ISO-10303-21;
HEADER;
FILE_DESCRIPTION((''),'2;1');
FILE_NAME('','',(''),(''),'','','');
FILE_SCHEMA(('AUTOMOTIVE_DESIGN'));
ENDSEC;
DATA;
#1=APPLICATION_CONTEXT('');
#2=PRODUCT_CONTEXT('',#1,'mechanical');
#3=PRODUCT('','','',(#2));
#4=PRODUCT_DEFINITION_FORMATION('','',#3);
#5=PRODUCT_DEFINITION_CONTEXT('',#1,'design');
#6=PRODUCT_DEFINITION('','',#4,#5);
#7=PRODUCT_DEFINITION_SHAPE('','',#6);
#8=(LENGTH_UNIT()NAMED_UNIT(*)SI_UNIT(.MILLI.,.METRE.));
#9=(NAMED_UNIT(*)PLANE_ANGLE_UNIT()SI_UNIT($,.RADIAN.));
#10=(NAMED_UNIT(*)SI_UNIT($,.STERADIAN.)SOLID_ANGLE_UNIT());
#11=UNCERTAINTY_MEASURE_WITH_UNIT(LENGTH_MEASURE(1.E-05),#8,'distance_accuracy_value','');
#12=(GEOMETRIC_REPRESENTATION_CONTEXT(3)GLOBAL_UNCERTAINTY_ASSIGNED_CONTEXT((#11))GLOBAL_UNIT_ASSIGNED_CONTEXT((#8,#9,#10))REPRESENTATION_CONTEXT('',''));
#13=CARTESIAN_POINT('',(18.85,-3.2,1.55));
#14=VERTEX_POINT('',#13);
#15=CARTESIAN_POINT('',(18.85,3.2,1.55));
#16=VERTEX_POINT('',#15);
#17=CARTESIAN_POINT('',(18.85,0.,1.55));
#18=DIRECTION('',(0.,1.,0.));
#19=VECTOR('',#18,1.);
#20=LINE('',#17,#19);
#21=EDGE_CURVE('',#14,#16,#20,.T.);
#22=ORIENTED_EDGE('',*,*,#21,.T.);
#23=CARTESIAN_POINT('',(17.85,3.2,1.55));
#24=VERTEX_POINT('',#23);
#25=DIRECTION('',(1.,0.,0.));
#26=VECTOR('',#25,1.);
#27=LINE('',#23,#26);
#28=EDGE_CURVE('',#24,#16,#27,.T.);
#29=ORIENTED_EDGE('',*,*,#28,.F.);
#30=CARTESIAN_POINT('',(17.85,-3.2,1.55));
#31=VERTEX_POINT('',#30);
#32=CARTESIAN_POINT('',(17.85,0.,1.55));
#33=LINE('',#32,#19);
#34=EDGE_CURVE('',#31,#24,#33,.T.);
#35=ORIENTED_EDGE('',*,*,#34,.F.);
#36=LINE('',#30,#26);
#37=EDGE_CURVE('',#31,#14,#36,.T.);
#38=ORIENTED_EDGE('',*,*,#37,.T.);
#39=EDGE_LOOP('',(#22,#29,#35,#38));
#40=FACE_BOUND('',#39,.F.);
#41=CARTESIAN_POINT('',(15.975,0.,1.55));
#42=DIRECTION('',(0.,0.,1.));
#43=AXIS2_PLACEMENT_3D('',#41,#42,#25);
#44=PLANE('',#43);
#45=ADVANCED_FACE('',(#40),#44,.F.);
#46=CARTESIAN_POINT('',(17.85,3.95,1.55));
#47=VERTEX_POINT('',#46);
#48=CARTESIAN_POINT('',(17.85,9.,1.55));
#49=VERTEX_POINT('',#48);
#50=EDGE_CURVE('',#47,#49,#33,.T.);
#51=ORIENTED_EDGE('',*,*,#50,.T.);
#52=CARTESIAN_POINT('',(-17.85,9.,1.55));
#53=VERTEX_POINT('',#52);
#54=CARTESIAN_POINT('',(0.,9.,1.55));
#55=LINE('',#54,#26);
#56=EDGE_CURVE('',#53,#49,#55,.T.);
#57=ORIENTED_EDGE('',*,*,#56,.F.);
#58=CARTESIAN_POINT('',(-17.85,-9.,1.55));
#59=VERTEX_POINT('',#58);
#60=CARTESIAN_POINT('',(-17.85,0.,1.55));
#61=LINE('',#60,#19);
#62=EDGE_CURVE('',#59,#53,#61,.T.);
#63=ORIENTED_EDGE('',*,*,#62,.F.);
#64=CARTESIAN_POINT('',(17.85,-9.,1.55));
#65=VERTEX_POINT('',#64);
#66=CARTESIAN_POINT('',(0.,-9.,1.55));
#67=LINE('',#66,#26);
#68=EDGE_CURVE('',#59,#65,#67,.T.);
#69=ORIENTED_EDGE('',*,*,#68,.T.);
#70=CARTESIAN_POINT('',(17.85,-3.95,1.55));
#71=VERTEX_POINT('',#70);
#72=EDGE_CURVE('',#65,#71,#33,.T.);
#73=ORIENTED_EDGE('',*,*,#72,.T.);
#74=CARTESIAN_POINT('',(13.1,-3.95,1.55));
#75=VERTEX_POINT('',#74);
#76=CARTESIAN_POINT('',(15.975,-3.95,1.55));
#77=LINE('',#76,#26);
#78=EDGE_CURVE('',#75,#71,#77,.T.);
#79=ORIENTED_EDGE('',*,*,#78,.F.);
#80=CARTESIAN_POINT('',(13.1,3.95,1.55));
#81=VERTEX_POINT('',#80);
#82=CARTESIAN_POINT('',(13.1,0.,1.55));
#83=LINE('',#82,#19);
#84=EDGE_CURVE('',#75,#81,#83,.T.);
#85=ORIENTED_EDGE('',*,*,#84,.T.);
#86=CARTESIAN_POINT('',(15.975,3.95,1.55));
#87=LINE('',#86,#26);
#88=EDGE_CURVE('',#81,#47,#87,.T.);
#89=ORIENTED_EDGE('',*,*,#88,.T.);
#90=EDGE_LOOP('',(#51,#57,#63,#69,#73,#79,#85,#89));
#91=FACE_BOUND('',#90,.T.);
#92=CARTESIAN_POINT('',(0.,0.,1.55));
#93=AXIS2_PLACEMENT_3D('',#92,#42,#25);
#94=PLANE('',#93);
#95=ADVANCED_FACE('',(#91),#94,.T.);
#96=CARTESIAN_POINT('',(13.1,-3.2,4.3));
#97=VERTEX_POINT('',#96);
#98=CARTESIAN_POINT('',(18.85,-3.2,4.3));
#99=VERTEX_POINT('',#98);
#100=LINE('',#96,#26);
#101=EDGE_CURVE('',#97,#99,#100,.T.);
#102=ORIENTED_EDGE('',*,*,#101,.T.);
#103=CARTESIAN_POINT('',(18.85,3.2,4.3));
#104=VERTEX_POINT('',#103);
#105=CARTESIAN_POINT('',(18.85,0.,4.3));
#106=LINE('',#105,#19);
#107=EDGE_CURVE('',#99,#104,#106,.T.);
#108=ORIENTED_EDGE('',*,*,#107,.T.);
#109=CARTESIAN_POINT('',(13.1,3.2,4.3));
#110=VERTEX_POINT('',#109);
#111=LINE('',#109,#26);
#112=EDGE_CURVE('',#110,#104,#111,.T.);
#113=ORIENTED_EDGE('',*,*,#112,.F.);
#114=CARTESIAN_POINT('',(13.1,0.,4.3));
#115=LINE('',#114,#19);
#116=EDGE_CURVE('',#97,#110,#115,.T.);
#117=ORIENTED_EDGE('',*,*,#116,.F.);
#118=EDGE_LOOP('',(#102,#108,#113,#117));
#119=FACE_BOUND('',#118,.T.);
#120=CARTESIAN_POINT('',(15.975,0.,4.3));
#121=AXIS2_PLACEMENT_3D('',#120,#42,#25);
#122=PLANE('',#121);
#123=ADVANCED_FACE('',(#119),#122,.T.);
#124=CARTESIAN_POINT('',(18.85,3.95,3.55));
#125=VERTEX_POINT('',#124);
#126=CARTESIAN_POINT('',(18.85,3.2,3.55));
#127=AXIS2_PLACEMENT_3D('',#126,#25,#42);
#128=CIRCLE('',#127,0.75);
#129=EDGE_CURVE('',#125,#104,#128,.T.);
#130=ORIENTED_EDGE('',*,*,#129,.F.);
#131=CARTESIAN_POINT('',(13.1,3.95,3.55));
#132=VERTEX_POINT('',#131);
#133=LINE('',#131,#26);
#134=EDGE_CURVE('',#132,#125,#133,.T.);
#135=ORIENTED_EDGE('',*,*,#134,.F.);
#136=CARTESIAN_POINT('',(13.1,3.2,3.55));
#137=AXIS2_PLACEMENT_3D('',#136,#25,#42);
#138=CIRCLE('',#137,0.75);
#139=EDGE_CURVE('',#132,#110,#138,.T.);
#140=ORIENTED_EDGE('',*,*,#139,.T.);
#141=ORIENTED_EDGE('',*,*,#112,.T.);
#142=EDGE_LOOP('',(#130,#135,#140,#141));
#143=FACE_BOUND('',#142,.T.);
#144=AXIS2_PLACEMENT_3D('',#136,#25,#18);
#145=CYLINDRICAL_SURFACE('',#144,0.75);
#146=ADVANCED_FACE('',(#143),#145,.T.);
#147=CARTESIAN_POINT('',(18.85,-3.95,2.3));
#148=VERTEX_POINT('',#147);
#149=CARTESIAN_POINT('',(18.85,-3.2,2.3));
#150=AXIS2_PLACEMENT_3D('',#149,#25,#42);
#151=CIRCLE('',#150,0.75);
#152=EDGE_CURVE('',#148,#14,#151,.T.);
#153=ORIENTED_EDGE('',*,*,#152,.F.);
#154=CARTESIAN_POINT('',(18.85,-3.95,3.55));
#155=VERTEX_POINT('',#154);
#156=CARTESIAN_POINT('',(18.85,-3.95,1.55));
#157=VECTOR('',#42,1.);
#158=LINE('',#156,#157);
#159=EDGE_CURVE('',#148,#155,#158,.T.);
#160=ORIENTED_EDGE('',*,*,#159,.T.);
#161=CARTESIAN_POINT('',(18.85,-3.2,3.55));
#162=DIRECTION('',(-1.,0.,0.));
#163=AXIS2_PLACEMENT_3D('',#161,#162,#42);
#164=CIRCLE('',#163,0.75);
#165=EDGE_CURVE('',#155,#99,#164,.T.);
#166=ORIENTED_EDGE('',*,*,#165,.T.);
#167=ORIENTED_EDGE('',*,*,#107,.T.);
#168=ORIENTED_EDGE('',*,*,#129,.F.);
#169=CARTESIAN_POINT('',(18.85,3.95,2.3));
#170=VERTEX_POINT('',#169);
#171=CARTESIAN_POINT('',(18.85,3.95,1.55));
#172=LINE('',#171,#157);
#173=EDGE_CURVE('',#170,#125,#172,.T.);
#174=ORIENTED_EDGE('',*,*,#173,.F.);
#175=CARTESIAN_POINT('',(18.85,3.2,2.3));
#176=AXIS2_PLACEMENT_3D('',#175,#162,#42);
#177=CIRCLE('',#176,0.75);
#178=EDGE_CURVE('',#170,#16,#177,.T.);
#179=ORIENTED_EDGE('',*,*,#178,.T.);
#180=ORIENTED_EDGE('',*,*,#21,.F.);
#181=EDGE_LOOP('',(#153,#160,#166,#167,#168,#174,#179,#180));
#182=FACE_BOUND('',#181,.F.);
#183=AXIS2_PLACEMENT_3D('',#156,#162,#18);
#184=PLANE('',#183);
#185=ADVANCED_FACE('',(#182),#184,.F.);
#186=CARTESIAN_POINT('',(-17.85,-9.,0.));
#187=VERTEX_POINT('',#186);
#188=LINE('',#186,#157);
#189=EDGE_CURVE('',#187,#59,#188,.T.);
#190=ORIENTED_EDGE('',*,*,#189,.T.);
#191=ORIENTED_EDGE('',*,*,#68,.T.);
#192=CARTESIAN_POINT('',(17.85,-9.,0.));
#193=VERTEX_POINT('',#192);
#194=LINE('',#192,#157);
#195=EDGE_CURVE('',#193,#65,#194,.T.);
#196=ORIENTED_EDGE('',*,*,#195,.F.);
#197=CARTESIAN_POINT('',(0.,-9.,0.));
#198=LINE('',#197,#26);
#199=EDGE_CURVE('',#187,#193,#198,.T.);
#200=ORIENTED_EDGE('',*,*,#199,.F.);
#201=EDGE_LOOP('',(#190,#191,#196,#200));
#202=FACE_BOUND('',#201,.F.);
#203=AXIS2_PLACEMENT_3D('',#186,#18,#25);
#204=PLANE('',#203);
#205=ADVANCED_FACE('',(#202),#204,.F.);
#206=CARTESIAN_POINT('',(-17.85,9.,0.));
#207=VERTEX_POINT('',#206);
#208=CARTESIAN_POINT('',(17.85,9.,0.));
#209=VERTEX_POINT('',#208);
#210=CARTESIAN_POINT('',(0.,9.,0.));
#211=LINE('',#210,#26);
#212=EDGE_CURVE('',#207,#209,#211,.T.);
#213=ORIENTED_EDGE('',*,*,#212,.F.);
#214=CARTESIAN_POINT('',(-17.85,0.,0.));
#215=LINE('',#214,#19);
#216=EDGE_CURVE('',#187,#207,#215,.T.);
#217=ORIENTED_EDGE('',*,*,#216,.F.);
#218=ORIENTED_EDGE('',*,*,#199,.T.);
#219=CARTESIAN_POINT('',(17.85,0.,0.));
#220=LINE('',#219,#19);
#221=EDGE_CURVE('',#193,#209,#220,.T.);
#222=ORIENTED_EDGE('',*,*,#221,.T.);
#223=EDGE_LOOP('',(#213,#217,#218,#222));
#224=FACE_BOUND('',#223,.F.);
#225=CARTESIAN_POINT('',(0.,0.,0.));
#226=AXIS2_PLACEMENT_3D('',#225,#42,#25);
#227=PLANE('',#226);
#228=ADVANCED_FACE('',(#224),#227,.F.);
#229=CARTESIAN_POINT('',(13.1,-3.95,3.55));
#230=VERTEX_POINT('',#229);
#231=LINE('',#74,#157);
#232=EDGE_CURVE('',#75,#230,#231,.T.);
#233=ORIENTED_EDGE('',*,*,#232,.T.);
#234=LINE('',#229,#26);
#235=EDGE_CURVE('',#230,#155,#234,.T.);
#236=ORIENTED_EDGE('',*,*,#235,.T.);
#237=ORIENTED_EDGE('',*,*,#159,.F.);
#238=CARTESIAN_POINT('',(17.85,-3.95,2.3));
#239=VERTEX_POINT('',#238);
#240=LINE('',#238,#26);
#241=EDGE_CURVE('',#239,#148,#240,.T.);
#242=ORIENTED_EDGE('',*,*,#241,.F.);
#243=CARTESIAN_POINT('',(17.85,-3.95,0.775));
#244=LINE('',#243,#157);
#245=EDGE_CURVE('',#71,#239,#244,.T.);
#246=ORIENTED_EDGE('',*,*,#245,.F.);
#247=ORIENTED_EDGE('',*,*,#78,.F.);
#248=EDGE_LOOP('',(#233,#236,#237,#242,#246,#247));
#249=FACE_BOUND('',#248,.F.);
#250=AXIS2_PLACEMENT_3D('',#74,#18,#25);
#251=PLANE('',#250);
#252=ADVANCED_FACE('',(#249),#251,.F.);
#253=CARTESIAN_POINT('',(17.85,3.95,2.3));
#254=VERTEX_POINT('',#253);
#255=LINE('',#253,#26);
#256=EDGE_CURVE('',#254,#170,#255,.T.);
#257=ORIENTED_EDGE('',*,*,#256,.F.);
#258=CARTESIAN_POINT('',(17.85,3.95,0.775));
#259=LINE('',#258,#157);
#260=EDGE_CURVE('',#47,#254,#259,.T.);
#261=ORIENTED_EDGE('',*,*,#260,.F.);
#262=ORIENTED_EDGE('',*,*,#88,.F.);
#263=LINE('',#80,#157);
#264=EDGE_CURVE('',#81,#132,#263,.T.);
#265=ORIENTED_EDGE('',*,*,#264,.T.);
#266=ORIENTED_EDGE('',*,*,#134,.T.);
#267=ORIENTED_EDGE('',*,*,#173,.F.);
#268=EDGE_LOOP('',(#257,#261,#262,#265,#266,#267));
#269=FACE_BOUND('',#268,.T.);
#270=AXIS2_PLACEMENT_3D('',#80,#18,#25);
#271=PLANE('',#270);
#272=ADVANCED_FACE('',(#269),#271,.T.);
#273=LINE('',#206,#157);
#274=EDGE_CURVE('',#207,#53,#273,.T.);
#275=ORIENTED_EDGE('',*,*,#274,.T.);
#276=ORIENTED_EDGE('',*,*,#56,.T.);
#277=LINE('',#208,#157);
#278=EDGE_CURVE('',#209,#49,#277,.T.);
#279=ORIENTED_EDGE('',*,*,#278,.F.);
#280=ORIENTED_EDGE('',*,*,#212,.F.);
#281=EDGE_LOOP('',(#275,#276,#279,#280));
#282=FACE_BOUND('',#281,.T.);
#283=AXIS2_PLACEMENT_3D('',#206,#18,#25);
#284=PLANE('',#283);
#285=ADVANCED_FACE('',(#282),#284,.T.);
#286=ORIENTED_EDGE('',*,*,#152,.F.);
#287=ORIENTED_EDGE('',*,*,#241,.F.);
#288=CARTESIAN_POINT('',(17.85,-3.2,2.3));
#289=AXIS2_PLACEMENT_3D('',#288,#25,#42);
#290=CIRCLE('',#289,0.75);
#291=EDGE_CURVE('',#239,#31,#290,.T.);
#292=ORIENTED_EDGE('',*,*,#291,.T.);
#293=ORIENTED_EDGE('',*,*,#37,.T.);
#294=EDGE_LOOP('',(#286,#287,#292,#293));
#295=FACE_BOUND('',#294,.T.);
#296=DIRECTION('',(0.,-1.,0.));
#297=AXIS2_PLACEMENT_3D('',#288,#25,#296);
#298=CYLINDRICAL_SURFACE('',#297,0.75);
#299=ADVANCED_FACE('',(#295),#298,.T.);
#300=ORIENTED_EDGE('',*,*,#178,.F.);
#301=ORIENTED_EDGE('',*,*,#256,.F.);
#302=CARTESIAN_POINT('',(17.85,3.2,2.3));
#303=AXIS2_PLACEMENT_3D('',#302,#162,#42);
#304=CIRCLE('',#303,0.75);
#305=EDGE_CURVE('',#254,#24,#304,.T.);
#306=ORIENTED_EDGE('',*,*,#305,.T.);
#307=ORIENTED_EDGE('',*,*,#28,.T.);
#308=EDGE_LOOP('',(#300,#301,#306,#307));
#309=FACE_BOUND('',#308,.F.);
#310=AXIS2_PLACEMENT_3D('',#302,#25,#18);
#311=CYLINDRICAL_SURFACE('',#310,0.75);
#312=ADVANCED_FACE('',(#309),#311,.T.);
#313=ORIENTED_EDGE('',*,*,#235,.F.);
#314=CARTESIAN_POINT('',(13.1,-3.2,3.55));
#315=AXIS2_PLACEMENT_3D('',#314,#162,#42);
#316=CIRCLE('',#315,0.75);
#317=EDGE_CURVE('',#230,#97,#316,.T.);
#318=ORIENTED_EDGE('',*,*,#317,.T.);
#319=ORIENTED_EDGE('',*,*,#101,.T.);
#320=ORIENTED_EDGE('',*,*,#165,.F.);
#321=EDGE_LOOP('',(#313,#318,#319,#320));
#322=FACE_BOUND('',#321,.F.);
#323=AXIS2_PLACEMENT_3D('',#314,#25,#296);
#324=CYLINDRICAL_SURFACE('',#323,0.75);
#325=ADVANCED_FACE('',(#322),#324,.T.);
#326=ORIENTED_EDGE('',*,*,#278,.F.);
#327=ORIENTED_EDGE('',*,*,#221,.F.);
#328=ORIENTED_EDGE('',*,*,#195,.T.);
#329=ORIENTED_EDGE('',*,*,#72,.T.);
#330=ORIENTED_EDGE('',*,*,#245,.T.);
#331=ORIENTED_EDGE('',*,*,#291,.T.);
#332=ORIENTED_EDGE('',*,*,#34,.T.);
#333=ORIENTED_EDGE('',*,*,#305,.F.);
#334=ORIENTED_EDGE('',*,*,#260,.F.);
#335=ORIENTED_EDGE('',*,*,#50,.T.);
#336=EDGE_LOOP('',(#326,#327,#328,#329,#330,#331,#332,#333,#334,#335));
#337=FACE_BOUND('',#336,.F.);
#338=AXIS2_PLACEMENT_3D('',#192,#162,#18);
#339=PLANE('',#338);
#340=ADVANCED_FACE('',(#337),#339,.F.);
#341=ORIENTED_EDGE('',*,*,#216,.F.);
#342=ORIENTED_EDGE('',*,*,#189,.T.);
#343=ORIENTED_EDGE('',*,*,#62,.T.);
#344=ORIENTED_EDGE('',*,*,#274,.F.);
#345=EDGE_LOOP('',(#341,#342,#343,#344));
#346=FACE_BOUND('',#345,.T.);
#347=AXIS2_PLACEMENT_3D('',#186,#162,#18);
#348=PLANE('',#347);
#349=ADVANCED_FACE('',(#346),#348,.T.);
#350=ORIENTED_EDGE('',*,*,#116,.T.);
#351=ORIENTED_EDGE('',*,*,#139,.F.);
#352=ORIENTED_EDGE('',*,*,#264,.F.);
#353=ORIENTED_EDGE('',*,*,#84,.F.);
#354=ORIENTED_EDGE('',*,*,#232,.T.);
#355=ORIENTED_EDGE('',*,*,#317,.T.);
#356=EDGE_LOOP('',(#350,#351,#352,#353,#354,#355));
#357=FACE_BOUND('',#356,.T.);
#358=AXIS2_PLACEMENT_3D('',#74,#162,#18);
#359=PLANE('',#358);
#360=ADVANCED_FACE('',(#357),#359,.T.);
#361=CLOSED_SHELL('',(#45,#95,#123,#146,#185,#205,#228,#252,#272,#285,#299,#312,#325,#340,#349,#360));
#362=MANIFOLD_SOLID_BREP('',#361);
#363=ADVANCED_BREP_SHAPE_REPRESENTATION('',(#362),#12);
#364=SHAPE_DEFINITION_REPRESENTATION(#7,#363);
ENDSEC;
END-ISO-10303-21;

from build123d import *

# Parameters (mm, degrees)
F0_W     = 35.7
F0_H     = 18
F1_DEPTH = 1.55
F2_W     = 5.75
F2_H     = 7.9
F3_DEPTH = 2.75
F4_R     = 0.75


with BuildPart() as f1:
    # F0 (on Top) → F1 (new body)
    with BuildSketch(Plane.XY):
        Rectangle(F0_W, F0_H)
    extrude(amount=F1_DEPTH)

    # F2 (on face) → F3 (join)
    with BuildSketch(Plane.XY.offset(1.55)):
        with Locations((15.975, 0)):
            Rectangle(F2_W, F2_H)
    extrude(amount=F3_DEPTH)

    # F4
    f4_edges = [f1.edges().sort_by_distance(p)[0] for p in [
        (15.975, 3.95, 4.3),
        (15.975, -3.95, 4.3),
        (18.35, 3.95, 1.55),
        (18.35, -3.95, 1.55),
    ]]
    fillet(f4_edges, radius=F4_R)


solid = f1.part
